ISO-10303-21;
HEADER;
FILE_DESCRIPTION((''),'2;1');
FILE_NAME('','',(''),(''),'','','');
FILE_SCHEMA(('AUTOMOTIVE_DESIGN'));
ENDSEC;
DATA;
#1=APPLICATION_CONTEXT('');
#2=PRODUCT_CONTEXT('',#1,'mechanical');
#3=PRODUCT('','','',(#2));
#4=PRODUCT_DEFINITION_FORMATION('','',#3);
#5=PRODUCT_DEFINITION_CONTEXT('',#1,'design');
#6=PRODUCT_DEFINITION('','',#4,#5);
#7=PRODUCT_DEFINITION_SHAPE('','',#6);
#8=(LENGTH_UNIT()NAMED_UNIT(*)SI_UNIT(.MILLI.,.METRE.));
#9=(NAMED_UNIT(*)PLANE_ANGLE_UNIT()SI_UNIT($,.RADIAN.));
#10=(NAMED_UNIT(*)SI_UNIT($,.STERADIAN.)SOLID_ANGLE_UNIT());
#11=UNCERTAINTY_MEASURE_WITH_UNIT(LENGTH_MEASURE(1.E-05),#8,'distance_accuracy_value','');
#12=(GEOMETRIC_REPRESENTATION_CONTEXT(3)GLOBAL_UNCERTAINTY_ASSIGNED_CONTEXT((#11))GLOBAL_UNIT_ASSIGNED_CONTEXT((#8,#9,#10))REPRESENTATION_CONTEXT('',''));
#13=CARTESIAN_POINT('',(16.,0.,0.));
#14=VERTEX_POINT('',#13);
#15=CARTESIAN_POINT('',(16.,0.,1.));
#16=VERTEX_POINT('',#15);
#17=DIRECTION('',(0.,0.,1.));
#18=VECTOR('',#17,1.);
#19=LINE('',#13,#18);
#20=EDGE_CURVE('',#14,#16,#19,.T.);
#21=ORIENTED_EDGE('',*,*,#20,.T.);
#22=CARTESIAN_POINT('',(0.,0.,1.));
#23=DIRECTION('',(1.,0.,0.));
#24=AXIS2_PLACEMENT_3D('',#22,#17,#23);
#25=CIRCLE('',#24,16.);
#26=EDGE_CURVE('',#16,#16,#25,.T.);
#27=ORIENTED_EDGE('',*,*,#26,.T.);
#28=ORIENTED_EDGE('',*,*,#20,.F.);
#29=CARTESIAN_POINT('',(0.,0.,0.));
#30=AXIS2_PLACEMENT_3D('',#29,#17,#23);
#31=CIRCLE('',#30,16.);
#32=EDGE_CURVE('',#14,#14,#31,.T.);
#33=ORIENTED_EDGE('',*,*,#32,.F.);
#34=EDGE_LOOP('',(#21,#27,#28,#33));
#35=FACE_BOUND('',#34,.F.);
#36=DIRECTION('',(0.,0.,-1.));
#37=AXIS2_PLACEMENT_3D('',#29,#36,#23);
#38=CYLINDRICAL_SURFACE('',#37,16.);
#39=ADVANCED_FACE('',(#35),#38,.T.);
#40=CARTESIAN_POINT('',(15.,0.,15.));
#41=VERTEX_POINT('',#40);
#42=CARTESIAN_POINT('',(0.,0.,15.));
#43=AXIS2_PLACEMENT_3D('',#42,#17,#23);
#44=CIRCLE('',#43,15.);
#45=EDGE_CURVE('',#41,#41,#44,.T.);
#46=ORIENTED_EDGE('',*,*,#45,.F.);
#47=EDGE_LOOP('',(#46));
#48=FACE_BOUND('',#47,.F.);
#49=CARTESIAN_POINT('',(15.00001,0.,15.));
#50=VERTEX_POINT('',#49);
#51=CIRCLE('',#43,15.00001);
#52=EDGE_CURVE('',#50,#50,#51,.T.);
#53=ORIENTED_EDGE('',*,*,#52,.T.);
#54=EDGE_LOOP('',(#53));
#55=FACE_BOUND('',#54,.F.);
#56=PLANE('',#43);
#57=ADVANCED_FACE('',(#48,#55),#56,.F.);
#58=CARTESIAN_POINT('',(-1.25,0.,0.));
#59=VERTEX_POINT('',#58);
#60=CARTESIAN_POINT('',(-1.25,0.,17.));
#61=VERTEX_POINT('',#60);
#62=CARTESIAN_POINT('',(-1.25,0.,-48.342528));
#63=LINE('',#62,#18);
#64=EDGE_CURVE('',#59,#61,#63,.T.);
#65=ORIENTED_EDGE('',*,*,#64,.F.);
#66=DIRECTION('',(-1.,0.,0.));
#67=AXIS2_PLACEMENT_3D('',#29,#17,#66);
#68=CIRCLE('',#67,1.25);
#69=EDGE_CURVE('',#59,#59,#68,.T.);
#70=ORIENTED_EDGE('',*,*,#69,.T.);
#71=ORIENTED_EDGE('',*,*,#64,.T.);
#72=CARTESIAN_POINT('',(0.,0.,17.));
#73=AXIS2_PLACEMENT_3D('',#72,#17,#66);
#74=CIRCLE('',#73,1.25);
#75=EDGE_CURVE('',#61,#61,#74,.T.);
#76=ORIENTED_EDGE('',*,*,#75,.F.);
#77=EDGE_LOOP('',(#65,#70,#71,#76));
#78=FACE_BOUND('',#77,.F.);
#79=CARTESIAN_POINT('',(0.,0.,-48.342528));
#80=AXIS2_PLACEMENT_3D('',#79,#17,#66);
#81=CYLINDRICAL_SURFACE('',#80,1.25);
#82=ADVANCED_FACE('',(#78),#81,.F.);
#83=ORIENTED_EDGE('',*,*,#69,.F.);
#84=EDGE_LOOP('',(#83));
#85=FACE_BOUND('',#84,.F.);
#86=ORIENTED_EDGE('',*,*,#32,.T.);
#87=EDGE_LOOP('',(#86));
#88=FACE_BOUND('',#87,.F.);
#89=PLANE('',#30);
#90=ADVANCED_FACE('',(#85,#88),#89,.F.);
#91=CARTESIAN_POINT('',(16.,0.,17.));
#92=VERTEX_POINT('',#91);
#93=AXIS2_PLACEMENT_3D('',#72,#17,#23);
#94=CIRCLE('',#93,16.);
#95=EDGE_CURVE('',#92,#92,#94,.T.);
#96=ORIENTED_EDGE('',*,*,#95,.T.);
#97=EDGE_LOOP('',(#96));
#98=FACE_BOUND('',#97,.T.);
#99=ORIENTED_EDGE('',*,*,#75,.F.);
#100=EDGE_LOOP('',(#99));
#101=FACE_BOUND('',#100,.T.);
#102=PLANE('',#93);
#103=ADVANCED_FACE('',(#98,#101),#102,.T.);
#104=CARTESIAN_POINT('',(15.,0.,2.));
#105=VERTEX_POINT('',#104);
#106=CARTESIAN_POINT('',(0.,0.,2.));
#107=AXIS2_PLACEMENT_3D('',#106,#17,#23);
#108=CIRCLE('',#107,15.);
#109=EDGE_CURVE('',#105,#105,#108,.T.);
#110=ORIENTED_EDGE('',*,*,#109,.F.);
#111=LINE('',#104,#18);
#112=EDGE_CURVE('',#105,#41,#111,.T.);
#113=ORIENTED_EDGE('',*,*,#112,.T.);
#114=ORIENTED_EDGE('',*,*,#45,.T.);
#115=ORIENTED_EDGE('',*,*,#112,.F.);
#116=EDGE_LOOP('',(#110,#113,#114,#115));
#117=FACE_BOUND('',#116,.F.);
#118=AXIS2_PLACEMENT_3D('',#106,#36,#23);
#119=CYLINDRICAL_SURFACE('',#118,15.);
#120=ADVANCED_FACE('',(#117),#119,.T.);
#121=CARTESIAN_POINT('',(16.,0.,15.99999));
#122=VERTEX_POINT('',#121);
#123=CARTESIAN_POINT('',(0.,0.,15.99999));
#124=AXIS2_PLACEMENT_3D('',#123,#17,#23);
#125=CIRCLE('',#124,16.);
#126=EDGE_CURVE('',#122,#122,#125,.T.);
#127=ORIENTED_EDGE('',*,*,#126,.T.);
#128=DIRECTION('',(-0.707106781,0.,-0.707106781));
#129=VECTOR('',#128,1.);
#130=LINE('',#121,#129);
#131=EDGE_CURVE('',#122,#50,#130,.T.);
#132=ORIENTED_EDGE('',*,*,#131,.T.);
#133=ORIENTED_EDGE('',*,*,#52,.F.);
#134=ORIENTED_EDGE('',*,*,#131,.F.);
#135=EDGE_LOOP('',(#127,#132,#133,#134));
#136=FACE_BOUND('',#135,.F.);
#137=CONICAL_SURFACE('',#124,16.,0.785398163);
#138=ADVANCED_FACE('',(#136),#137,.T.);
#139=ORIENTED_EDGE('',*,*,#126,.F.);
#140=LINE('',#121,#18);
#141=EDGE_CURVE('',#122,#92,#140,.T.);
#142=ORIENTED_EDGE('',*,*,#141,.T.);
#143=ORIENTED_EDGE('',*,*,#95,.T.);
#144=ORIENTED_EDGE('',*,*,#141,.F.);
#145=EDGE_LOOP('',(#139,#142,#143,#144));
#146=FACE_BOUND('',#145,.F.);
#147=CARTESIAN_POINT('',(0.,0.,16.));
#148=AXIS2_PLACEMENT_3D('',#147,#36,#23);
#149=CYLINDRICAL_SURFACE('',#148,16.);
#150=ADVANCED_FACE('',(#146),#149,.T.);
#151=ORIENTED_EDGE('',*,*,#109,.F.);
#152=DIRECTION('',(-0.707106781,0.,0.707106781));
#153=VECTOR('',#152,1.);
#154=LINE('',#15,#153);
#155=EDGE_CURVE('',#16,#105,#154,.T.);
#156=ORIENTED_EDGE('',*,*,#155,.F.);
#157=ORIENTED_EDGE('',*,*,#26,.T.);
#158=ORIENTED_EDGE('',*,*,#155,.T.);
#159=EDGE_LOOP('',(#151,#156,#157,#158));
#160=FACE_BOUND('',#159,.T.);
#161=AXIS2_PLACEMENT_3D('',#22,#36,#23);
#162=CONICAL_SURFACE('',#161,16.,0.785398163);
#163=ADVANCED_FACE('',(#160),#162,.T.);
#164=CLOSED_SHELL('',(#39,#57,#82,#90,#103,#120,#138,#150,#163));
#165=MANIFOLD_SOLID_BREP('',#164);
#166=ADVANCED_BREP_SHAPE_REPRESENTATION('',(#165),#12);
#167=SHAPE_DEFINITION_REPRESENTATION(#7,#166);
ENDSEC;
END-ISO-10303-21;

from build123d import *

# Parameters (mm, degrees)
F0_R      = 16
F1_DEPTH  = 2
F2_SIZE   = 1
F4_R      = 15
F5_DEPTH  = 13
F6_R      = 16
F7_DEPTH  = 1
F8_SIZE   = 0.99999
F9_DEPTH  = 1
F10_R     = 1.25
F11_DEPTH = 2.5
F12_D     = 2.5


# Not quite as in the source:
# - a fillet or chamfer is up to 0.001 mm smaller than in the source, because OpenCascade refuses the exact size


with BuildPart() as f1:
    # F0 (on Top) → F1 (new body)
    with BuildSketch(Plane.XY):
        Circle(F0_R)
    extrude(amount=F1_DEPTH)

    # F2
    f2_edges = [f1.edges().sort_by_distance(p)[0] for p in [
        (-16, 0, 2),
    ]]
    chamfer(f2_edges, length=F2_SIZE)

    # F4 (on face) → F5 (join)
    with BuildSketch(Plane.XY.offset(2)):
        Circle(F4_R)
    extrude(amount=F5_DEPTH)

    # F6 (on face) → F7 (join)
    with BuildSketch(Plane.XY.offset(15)):
        Circle(F6_R)
    extrude(amount=F7_DEPTH)

    # F8 (size 1 in the source; OpenCascade refuses exactly that, so slightly less here)
    f8_edges = [f1.edges().sort_by_distance(p)[0] for p in [
        (-16, 0, 15),
    ]]
    chamfer(f8_edges, length=F8_SIZE)

    # F9 (add): a face of the model
    f9_faces = [f1.faces().sort_by_distance(p)[0] for p in [
        (0, 0, 16),
    ]]
    extrude(f9_faces, amount=F9_DEPTH)

    # F10 (on face) → F11 (cut)
    with BuildSketch(Plane.XY):
        Circle(F10_R)
    extrude(amount=-F11_DEPTH, mode=Mode.SUBTRACT)

    # F12 (through all)
    with Locations(Plane(origin=(0, 0, 0), x_dir=(1, 0, 0), z_dir=(0, 0, -1))):
        with Locations((0, 0)):
            Hole(F12_D / 2)


solid = f1.part
